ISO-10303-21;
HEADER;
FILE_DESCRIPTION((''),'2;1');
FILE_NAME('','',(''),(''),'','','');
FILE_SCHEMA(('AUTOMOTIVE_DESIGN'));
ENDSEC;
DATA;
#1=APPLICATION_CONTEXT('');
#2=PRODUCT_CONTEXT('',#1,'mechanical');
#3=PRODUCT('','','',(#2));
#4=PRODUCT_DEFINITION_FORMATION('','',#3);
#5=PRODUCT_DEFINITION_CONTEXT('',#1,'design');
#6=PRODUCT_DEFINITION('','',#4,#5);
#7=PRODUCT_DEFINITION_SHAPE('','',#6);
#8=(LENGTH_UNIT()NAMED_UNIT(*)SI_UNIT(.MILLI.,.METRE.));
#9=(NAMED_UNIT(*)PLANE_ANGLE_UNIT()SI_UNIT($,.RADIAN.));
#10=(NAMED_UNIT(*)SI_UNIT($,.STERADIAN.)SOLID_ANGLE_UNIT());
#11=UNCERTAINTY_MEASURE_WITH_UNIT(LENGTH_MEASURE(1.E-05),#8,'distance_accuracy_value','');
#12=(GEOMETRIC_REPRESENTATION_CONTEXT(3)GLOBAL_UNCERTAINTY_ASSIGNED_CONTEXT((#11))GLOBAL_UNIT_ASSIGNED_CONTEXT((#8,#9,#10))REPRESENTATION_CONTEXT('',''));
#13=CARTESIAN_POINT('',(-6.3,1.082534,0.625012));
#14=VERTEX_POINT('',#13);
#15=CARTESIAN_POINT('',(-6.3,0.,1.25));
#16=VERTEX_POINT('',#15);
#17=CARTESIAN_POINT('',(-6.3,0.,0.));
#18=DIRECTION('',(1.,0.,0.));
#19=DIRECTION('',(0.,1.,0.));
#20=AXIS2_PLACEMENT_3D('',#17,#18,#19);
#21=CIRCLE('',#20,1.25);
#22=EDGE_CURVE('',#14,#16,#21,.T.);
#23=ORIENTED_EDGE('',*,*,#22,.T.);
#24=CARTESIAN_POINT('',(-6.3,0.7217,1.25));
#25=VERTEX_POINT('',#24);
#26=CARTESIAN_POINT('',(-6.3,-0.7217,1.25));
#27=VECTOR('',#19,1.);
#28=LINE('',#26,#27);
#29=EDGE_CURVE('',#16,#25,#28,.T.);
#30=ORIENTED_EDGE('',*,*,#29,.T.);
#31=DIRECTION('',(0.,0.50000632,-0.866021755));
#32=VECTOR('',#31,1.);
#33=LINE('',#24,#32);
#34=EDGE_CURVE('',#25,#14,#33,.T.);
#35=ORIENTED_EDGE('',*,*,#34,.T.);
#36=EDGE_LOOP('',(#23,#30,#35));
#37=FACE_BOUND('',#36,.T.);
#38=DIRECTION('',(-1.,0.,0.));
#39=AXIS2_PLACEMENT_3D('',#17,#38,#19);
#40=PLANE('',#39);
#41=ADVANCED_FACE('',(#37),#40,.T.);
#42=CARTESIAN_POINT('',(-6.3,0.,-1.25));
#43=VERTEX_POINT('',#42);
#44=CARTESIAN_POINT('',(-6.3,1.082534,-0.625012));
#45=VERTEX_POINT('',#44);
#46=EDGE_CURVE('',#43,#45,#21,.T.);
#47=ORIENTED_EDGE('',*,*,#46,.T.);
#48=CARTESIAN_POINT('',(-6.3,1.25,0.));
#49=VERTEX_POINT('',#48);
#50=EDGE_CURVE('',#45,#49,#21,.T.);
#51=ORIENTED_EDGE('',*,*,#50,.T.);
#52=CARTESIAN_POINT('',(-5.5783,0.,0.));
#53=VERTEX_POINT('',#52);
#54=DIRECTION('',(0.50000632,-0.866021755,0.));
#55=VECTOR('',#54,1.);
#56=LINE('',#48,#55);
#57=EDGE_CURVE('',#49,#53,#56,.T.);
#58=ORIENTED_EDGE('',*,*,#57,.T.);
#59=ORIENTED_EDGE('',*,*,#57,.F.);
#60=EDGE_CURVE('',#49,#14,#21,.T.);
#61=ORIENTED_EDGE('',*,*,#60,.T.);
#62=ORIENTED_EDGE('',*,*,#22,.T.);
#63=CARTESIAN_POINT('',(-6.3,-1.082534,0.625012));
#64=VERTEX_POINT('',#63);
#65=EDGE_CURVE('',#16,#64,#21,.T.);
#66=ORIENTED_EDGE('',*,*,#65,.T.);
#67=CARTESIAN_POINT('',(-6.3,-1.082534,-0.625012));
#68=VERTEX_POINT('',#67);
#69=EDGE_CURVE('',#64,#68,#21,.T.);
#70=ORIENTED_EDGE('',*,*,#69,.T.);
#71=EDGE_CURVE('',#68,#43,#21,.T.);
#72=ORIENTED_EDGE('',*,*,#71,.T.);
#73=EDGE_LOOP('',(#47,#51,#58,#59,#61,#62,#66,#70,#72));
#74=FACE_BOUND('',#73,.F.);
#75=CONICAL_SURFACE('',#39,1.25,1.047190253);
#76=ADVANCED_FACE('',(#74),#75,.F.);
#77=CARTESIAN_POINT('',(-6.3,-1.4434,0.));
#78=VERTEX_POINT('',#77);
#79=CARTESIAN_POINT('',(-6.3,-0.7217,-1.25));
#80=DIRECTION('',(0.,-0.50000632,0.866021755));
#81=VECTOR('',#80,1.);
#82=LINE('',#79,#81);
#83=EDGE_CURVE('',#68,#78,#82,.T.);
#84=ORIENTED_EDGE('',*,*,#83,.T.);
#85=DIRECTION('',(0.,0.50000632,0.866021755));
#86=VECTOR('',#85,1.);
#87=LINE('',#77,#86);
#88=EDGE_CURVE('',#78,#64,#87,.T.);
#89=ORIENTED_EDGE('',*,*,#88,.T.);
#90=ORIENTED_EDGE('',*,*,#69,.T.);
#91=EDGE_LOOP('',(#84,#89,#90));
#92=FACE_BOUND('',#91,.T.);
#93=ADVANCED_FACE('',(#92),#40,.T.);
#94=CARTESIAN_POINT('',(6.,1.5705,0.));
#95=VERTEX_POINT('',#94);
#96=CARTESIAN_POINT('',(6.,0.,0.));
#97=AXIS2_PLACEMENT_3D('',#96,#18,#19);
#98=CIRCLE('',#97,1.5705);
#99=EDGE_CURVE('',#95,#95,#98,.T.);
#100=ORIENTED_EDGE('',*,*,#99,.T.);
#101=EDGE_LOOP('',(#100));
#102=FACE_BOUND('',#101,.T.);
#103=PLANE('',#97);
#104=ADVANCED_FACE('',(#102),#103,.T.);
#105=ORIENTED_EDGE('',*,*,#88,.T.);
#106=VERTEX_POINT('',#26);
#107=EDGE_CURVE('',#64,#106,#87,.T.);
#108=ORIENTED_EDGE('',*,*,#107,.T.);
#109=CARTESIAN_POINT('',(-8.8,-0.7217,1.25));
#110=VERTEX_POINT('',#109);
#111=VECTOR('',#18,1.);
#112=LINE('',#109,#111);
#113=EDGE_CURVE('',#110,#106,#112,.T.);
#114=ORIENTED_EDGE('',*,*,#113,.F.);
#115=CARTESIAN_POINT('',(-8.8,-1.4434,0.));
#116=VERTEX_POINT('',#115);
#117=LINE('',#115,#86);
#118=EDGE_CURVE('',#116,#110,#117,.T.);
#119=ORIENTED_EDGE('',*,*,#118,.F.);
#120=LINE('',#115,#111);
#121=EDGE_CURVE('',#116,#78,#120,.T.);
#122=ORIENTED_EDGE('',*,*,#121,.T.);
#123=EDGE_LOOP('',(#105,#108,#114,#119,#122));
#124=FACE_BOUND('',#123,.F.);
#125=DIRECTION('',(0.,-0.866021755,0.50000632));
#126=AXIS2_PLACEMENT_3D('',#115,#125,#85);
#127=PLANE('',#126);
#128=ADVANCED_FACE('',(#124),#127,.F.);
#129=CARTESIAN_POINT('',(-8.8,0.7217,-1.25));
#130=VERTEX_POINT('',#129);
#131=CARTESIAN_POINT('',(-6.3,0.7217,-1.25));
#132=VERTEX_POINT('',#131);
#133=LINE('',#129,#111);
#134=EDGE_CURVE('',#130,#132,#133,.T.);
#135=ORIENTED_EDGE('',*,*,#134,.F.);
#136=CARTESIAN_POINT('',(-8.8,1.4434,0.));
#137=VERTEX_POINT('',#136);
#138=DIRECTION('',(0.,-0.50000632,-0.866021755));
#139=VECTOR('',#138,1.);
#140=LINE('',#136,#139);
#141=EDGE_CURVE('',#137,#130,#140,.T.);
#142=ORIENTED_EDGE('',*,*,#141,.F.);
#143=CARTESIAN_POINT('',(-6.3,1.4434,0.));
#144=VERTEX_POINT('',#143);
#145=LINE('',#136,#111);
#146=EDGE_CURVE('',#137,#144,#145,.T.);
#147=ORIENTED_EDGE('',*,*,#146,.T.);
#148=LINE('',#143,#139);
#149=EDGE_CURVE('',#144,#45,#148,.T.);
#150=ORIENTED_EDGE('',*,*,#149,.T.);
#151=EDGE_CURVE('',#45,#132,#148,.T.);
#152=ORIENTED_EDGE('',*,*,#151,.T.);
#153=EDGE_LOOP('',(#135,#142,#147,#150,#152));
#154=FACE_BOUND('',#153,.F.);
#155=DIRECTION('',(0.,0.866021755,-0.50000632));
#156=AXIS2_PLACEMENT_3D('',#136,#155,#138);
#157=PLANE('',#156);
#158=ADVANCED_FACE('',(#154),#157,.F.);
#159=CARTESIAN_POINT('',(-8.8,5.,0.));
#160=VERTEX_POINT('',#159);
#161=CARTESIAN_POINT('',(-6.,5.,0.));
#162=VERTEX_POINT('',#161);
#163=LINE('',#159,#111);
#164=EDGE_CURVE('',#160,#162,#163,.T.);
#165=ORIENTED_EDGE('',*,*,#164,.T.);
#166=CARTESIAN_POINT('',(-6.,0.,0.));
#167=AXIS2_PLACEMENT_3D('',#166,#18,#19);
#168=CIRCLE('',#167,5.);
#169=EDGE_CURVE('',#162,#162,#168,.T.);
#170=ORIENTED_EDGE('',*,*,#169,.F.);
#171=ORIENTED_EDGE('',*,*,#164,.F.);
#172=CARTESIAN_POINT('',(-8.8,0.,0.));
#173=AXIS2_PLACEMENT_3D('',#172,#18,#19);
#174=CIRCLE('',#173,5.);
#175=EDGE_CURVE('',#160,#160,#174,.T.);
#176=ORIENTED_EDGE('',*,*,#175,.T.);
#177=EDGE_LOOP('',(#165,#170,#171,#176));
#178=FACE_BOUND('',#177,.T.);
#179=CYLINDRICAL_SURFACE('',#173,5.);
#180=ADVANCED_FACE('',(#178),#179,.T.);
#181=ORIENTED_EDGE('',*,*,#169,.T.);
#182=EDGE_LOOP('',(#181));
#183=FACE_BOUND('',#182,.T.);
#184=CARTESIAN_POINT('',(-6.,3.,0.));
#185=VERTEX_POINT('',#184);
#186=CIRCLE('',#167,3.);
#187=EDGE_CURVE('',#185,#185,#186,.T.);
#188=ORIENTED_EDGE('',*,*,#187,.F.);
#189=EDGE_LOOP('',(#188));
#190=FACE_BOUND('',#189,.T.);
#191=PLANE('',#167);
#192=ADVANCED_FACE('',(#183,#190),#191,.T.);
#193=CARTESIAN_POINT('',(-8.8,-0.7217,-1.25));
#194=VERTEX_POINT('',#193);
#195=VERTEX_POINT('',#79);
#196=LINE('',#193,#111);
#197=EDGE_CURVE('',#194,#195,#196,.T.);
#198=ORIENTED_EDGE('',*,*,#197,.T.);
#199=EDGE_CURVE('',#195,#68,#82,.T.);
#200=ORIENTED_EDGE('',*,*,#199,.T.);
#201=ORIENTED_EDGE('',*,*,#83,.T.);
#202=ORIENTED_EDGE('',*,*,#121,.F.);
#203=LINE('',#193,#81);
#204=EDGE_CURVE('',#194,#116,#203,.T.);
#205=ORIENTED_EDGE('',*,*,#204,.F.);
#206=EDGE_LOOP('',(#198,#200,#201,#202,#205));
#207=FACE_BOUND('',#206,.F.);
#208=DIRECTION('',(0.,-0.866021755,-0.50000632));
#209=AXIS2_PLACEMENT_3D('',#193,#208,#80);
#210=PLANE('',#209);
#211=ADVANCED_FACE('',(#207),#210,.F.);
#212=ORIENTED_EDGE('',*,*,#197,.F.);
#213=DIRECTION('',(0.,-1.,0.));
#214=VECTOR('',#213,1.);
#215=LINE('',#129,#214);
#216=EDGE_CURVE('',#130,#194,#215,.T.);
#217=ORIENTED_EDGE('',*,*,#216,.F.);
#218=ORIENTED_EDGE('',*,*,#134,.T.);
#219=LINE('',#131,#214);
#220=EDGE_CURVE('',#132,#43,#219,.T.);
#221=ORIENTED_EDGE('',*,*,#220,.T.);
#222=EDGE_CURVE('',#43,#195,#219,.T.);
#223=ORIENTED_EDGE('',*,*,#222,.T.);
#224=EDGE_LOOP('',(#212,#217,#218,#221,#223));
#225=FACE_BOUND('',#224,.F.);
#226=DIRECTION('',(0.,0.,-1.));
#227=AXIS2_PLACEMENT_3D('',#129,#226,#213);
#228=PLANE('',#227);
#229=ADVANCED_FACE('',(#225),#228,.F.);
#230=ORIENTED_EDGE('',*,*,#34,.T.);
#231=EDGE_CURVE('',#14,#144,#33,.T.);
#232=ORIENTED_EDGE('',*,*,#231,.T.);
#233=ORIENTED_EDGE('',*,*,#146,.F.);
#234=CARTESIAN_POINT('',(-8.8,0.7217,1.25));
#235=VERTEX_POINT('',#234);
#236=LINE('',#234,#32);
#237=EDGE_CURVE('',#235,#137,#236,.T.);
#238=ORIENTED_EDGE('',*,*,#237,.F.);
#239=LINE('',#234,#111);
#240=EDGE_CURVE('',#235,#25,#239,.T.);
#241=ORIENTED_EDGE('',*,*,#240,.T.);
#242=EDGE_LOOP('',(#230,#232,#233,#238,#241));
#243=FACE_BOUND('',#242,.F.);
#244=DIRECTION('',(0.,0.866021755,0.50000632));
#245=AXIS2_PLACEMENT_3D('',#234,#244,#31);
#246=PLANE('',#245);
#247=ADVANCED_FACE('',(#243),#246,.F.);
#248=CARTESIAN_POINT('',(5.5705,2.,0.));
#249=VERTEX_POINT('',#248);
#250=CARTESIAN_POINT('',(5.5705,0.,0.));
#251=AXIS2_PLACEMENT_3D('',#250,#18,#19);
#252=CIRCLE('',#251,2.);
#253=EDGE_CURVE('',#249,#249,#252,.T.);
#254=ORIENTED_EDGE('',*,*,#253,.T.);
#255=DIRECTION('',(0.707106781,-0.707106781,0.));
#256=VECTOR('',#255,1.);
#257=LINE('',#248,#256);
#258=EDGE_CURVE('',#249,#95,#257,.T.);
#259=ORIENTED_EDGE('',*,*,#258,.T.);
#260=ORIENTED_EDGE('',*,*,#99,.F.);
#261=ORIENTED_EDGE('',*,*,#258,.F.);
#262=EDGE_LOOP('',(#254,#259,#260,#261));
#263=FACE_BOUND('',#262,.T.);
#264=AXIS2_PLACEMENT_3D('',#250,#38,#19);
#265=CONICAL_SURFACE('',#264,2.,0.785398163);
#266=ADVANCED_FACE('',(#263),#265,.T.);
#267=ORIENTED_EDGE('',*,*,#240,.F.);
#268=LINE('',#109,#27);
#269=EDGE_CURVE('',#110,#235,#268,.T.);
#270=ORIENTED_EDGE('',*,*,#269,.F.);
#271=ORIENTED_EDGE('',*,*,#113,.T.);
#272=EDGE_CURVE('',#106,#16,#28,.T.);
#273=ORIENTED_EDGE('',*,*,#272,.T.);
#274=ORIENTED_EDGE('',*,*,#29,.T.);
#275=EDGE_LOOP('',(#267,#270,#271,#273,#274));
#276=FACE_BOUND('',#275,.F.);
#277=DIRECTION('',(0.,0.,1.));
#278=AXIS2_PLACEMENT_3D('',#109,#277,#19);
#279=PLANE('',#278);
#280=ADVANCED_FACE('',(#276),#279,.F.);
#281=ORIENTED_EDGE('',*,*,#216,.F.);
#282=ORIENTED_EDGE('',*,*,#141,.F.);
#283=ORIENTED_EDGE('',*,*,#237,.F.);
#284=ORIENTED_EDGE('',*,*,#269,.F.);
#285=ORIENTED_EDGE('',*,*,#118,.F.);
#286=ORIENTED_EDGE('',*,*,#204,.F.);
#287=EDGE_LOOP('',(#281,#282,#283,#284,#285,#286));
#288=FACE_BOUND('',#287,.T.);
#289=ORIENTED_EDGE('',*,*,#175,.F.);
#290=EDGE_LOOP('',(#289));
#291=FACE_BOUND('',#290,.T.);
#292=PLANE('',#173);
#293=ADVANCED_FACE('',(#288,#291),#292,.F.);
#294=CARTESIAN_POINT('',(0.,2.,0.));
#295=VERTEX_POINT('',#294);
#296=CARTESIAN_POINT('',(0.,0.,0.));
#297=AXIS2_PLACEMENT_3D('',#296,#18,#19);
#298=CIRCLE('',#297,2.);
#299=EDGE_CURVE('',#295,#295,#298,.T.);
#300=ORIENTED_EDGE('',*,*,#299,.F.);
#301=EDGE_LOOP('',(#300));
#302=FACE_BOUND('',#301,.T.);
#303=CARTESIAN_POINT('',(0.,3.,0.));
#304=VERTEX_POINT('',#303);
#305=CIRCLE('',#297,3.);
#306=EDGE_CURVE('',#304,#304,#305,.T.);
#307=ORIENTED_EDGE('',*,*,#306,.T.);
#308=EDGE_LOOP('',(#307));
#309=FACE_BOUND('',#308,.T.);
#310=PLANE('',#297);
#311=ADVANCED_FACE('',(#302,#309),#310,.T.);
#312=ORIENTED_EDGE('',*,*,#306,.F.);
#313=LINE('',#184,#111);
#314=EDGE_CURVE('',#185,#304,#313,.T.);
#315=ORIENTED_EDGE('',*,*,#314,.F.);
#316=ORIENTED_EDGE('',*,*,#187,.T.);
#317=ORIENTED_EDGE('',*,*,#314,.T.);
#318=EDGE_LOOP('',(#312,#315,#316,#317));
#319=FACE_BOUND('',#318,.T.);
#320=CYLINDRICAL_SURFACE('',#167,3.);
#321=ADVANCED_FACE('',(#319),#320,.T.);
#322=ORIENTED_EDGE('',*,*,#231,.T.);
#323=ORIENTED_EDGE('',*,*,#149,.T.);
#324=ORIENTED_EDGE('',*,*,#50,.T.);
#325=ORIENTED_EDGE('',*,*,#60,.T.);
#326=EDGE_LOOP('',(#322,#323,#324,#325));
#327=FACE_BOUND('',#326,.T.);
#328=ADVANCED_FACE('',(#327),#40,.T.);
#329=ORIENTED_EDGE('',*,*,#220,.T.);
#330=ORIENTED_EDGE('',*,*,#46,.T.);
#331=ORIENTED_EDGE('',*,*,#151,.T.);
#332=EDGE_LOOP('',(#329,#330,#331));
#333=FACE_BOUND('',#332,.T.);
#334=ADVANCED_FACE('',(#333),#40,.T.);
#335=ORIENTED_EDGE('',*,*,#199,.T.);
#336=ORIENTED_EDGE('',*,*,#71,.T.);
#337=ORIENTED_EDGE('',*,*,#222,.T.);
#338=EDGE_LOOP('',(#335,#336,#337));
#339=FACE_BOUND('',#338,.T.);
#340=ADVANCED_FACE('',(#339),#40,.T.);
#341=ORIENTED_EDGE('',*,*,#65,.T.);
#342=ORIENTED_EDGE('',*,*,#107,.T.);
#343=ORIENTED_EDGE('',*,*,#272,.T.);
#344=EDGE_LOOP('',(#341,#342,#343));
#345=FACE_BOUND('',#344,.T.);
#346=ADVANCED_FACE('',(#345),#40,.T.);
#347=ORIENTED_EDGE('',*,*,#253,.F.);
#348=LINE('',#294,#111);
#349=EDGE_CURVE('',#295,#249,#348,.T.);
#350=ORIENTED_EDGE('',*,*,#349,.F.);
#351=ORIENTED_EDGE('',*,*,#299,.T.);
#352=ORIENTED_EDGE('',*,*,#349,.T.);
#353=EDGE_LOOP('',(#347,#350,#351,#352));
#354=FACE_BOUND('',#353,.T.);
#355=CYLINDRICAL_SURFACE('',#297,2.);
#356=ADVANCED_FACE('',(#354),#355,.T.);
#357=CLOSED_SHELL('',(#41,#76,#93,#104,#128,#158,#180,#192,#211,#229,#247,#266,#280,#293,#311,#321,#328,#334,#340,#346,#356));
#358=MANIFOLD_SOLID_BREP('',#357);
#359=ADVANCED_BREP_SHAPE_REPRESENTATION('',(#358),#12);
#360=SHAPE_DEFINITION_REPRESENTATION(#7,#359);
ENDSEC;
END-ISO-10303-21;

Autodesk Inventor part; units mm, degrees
ref_plane "YZ Plane" through (0, 0, 0) normal (1, 0, 0) x (0, 1, 0)
ref_plane "XZ Plane" through (0, 0, 0) normal (0, 1, 0) x (-1, 0, 0)
ref_plane "XY Plane" through (0, 0, 0) normal (0, 0, 1) x (1, 0, 0)
sketch "Sketch_1" plane through (0, 0, 0) normal (0, 0, 1) x (1, 0, 0)
  line L0 (6, 0) -> (-8.8, 0)
  line L1 (-8.8, 0) -> (-8.8, 5)
  line L2 (-8.8, 5) -> (-6, 5)
  line L3 (-6, 5) -> (-6, 3)
  line L4 (-6, 3) -> (0, 3)
  line L5 (0, 3) -> (0, 2)
  line L6 (0, 2) -> (5.5705, 2)
  line L7 (5.5705, 2) -> (6, 1.5705)
  line L8 (6, 1.5705) -> (6, 0)
  line L9 (6, 0) -> (-8.8, 0)
revolve "Revolution1" add sketch "Sketch_1" angle 360 about axis through (6, 0, 0) along (1, 0, 0)
thread "Thread1" size "M4x0.7" class "6g" standard "ISO Metric profile" length 4.3705
sketch "Sketch_2" plane through (-8.8, 0, 0) normal (-1, 0, 0) x (0, 1, 0)
  line L0 (-1.4434, 0) -> (-0.7217, -1.25)
  line L1 (-0.7217, -1.25) -> (0.7217, -1.25)
  line L2 (0.7217, -1.25) -> (1.4434, 0)
  line L3 (1.4434, 0) -> (0.7217, 1.25)
  line L4 (0.7217, 1.25) -> (-0.7217, 1.25)
  line L5 (-0.7217, 1.25) -> (-1.4434, 0)
extrude "Extrusion1" cut sketch "Sketch_2" against normal blind 2.5
sketch "Sketch_3" plane through (0, 0, 0) normal (0, 0, 1) x (1, 0, 0)
  line L0 (-5.5783, 0) -> (-6.3, 0)
  line L1 (-6.3, 0) -> (-6.3, 1.25)
  line L2 (-6.3, 1.25) -> (-5.5783, 0)
  line L3 (-5.5783, 0) -> (-6.3, 0)
revolve "Revolution2" cut sketch "Sketch_3" angle 360 about axis through (-5.5783, 0, 0) along (1, 0, 0)
properties part number "DBB4-6-6" material "스테인리스스틸"
